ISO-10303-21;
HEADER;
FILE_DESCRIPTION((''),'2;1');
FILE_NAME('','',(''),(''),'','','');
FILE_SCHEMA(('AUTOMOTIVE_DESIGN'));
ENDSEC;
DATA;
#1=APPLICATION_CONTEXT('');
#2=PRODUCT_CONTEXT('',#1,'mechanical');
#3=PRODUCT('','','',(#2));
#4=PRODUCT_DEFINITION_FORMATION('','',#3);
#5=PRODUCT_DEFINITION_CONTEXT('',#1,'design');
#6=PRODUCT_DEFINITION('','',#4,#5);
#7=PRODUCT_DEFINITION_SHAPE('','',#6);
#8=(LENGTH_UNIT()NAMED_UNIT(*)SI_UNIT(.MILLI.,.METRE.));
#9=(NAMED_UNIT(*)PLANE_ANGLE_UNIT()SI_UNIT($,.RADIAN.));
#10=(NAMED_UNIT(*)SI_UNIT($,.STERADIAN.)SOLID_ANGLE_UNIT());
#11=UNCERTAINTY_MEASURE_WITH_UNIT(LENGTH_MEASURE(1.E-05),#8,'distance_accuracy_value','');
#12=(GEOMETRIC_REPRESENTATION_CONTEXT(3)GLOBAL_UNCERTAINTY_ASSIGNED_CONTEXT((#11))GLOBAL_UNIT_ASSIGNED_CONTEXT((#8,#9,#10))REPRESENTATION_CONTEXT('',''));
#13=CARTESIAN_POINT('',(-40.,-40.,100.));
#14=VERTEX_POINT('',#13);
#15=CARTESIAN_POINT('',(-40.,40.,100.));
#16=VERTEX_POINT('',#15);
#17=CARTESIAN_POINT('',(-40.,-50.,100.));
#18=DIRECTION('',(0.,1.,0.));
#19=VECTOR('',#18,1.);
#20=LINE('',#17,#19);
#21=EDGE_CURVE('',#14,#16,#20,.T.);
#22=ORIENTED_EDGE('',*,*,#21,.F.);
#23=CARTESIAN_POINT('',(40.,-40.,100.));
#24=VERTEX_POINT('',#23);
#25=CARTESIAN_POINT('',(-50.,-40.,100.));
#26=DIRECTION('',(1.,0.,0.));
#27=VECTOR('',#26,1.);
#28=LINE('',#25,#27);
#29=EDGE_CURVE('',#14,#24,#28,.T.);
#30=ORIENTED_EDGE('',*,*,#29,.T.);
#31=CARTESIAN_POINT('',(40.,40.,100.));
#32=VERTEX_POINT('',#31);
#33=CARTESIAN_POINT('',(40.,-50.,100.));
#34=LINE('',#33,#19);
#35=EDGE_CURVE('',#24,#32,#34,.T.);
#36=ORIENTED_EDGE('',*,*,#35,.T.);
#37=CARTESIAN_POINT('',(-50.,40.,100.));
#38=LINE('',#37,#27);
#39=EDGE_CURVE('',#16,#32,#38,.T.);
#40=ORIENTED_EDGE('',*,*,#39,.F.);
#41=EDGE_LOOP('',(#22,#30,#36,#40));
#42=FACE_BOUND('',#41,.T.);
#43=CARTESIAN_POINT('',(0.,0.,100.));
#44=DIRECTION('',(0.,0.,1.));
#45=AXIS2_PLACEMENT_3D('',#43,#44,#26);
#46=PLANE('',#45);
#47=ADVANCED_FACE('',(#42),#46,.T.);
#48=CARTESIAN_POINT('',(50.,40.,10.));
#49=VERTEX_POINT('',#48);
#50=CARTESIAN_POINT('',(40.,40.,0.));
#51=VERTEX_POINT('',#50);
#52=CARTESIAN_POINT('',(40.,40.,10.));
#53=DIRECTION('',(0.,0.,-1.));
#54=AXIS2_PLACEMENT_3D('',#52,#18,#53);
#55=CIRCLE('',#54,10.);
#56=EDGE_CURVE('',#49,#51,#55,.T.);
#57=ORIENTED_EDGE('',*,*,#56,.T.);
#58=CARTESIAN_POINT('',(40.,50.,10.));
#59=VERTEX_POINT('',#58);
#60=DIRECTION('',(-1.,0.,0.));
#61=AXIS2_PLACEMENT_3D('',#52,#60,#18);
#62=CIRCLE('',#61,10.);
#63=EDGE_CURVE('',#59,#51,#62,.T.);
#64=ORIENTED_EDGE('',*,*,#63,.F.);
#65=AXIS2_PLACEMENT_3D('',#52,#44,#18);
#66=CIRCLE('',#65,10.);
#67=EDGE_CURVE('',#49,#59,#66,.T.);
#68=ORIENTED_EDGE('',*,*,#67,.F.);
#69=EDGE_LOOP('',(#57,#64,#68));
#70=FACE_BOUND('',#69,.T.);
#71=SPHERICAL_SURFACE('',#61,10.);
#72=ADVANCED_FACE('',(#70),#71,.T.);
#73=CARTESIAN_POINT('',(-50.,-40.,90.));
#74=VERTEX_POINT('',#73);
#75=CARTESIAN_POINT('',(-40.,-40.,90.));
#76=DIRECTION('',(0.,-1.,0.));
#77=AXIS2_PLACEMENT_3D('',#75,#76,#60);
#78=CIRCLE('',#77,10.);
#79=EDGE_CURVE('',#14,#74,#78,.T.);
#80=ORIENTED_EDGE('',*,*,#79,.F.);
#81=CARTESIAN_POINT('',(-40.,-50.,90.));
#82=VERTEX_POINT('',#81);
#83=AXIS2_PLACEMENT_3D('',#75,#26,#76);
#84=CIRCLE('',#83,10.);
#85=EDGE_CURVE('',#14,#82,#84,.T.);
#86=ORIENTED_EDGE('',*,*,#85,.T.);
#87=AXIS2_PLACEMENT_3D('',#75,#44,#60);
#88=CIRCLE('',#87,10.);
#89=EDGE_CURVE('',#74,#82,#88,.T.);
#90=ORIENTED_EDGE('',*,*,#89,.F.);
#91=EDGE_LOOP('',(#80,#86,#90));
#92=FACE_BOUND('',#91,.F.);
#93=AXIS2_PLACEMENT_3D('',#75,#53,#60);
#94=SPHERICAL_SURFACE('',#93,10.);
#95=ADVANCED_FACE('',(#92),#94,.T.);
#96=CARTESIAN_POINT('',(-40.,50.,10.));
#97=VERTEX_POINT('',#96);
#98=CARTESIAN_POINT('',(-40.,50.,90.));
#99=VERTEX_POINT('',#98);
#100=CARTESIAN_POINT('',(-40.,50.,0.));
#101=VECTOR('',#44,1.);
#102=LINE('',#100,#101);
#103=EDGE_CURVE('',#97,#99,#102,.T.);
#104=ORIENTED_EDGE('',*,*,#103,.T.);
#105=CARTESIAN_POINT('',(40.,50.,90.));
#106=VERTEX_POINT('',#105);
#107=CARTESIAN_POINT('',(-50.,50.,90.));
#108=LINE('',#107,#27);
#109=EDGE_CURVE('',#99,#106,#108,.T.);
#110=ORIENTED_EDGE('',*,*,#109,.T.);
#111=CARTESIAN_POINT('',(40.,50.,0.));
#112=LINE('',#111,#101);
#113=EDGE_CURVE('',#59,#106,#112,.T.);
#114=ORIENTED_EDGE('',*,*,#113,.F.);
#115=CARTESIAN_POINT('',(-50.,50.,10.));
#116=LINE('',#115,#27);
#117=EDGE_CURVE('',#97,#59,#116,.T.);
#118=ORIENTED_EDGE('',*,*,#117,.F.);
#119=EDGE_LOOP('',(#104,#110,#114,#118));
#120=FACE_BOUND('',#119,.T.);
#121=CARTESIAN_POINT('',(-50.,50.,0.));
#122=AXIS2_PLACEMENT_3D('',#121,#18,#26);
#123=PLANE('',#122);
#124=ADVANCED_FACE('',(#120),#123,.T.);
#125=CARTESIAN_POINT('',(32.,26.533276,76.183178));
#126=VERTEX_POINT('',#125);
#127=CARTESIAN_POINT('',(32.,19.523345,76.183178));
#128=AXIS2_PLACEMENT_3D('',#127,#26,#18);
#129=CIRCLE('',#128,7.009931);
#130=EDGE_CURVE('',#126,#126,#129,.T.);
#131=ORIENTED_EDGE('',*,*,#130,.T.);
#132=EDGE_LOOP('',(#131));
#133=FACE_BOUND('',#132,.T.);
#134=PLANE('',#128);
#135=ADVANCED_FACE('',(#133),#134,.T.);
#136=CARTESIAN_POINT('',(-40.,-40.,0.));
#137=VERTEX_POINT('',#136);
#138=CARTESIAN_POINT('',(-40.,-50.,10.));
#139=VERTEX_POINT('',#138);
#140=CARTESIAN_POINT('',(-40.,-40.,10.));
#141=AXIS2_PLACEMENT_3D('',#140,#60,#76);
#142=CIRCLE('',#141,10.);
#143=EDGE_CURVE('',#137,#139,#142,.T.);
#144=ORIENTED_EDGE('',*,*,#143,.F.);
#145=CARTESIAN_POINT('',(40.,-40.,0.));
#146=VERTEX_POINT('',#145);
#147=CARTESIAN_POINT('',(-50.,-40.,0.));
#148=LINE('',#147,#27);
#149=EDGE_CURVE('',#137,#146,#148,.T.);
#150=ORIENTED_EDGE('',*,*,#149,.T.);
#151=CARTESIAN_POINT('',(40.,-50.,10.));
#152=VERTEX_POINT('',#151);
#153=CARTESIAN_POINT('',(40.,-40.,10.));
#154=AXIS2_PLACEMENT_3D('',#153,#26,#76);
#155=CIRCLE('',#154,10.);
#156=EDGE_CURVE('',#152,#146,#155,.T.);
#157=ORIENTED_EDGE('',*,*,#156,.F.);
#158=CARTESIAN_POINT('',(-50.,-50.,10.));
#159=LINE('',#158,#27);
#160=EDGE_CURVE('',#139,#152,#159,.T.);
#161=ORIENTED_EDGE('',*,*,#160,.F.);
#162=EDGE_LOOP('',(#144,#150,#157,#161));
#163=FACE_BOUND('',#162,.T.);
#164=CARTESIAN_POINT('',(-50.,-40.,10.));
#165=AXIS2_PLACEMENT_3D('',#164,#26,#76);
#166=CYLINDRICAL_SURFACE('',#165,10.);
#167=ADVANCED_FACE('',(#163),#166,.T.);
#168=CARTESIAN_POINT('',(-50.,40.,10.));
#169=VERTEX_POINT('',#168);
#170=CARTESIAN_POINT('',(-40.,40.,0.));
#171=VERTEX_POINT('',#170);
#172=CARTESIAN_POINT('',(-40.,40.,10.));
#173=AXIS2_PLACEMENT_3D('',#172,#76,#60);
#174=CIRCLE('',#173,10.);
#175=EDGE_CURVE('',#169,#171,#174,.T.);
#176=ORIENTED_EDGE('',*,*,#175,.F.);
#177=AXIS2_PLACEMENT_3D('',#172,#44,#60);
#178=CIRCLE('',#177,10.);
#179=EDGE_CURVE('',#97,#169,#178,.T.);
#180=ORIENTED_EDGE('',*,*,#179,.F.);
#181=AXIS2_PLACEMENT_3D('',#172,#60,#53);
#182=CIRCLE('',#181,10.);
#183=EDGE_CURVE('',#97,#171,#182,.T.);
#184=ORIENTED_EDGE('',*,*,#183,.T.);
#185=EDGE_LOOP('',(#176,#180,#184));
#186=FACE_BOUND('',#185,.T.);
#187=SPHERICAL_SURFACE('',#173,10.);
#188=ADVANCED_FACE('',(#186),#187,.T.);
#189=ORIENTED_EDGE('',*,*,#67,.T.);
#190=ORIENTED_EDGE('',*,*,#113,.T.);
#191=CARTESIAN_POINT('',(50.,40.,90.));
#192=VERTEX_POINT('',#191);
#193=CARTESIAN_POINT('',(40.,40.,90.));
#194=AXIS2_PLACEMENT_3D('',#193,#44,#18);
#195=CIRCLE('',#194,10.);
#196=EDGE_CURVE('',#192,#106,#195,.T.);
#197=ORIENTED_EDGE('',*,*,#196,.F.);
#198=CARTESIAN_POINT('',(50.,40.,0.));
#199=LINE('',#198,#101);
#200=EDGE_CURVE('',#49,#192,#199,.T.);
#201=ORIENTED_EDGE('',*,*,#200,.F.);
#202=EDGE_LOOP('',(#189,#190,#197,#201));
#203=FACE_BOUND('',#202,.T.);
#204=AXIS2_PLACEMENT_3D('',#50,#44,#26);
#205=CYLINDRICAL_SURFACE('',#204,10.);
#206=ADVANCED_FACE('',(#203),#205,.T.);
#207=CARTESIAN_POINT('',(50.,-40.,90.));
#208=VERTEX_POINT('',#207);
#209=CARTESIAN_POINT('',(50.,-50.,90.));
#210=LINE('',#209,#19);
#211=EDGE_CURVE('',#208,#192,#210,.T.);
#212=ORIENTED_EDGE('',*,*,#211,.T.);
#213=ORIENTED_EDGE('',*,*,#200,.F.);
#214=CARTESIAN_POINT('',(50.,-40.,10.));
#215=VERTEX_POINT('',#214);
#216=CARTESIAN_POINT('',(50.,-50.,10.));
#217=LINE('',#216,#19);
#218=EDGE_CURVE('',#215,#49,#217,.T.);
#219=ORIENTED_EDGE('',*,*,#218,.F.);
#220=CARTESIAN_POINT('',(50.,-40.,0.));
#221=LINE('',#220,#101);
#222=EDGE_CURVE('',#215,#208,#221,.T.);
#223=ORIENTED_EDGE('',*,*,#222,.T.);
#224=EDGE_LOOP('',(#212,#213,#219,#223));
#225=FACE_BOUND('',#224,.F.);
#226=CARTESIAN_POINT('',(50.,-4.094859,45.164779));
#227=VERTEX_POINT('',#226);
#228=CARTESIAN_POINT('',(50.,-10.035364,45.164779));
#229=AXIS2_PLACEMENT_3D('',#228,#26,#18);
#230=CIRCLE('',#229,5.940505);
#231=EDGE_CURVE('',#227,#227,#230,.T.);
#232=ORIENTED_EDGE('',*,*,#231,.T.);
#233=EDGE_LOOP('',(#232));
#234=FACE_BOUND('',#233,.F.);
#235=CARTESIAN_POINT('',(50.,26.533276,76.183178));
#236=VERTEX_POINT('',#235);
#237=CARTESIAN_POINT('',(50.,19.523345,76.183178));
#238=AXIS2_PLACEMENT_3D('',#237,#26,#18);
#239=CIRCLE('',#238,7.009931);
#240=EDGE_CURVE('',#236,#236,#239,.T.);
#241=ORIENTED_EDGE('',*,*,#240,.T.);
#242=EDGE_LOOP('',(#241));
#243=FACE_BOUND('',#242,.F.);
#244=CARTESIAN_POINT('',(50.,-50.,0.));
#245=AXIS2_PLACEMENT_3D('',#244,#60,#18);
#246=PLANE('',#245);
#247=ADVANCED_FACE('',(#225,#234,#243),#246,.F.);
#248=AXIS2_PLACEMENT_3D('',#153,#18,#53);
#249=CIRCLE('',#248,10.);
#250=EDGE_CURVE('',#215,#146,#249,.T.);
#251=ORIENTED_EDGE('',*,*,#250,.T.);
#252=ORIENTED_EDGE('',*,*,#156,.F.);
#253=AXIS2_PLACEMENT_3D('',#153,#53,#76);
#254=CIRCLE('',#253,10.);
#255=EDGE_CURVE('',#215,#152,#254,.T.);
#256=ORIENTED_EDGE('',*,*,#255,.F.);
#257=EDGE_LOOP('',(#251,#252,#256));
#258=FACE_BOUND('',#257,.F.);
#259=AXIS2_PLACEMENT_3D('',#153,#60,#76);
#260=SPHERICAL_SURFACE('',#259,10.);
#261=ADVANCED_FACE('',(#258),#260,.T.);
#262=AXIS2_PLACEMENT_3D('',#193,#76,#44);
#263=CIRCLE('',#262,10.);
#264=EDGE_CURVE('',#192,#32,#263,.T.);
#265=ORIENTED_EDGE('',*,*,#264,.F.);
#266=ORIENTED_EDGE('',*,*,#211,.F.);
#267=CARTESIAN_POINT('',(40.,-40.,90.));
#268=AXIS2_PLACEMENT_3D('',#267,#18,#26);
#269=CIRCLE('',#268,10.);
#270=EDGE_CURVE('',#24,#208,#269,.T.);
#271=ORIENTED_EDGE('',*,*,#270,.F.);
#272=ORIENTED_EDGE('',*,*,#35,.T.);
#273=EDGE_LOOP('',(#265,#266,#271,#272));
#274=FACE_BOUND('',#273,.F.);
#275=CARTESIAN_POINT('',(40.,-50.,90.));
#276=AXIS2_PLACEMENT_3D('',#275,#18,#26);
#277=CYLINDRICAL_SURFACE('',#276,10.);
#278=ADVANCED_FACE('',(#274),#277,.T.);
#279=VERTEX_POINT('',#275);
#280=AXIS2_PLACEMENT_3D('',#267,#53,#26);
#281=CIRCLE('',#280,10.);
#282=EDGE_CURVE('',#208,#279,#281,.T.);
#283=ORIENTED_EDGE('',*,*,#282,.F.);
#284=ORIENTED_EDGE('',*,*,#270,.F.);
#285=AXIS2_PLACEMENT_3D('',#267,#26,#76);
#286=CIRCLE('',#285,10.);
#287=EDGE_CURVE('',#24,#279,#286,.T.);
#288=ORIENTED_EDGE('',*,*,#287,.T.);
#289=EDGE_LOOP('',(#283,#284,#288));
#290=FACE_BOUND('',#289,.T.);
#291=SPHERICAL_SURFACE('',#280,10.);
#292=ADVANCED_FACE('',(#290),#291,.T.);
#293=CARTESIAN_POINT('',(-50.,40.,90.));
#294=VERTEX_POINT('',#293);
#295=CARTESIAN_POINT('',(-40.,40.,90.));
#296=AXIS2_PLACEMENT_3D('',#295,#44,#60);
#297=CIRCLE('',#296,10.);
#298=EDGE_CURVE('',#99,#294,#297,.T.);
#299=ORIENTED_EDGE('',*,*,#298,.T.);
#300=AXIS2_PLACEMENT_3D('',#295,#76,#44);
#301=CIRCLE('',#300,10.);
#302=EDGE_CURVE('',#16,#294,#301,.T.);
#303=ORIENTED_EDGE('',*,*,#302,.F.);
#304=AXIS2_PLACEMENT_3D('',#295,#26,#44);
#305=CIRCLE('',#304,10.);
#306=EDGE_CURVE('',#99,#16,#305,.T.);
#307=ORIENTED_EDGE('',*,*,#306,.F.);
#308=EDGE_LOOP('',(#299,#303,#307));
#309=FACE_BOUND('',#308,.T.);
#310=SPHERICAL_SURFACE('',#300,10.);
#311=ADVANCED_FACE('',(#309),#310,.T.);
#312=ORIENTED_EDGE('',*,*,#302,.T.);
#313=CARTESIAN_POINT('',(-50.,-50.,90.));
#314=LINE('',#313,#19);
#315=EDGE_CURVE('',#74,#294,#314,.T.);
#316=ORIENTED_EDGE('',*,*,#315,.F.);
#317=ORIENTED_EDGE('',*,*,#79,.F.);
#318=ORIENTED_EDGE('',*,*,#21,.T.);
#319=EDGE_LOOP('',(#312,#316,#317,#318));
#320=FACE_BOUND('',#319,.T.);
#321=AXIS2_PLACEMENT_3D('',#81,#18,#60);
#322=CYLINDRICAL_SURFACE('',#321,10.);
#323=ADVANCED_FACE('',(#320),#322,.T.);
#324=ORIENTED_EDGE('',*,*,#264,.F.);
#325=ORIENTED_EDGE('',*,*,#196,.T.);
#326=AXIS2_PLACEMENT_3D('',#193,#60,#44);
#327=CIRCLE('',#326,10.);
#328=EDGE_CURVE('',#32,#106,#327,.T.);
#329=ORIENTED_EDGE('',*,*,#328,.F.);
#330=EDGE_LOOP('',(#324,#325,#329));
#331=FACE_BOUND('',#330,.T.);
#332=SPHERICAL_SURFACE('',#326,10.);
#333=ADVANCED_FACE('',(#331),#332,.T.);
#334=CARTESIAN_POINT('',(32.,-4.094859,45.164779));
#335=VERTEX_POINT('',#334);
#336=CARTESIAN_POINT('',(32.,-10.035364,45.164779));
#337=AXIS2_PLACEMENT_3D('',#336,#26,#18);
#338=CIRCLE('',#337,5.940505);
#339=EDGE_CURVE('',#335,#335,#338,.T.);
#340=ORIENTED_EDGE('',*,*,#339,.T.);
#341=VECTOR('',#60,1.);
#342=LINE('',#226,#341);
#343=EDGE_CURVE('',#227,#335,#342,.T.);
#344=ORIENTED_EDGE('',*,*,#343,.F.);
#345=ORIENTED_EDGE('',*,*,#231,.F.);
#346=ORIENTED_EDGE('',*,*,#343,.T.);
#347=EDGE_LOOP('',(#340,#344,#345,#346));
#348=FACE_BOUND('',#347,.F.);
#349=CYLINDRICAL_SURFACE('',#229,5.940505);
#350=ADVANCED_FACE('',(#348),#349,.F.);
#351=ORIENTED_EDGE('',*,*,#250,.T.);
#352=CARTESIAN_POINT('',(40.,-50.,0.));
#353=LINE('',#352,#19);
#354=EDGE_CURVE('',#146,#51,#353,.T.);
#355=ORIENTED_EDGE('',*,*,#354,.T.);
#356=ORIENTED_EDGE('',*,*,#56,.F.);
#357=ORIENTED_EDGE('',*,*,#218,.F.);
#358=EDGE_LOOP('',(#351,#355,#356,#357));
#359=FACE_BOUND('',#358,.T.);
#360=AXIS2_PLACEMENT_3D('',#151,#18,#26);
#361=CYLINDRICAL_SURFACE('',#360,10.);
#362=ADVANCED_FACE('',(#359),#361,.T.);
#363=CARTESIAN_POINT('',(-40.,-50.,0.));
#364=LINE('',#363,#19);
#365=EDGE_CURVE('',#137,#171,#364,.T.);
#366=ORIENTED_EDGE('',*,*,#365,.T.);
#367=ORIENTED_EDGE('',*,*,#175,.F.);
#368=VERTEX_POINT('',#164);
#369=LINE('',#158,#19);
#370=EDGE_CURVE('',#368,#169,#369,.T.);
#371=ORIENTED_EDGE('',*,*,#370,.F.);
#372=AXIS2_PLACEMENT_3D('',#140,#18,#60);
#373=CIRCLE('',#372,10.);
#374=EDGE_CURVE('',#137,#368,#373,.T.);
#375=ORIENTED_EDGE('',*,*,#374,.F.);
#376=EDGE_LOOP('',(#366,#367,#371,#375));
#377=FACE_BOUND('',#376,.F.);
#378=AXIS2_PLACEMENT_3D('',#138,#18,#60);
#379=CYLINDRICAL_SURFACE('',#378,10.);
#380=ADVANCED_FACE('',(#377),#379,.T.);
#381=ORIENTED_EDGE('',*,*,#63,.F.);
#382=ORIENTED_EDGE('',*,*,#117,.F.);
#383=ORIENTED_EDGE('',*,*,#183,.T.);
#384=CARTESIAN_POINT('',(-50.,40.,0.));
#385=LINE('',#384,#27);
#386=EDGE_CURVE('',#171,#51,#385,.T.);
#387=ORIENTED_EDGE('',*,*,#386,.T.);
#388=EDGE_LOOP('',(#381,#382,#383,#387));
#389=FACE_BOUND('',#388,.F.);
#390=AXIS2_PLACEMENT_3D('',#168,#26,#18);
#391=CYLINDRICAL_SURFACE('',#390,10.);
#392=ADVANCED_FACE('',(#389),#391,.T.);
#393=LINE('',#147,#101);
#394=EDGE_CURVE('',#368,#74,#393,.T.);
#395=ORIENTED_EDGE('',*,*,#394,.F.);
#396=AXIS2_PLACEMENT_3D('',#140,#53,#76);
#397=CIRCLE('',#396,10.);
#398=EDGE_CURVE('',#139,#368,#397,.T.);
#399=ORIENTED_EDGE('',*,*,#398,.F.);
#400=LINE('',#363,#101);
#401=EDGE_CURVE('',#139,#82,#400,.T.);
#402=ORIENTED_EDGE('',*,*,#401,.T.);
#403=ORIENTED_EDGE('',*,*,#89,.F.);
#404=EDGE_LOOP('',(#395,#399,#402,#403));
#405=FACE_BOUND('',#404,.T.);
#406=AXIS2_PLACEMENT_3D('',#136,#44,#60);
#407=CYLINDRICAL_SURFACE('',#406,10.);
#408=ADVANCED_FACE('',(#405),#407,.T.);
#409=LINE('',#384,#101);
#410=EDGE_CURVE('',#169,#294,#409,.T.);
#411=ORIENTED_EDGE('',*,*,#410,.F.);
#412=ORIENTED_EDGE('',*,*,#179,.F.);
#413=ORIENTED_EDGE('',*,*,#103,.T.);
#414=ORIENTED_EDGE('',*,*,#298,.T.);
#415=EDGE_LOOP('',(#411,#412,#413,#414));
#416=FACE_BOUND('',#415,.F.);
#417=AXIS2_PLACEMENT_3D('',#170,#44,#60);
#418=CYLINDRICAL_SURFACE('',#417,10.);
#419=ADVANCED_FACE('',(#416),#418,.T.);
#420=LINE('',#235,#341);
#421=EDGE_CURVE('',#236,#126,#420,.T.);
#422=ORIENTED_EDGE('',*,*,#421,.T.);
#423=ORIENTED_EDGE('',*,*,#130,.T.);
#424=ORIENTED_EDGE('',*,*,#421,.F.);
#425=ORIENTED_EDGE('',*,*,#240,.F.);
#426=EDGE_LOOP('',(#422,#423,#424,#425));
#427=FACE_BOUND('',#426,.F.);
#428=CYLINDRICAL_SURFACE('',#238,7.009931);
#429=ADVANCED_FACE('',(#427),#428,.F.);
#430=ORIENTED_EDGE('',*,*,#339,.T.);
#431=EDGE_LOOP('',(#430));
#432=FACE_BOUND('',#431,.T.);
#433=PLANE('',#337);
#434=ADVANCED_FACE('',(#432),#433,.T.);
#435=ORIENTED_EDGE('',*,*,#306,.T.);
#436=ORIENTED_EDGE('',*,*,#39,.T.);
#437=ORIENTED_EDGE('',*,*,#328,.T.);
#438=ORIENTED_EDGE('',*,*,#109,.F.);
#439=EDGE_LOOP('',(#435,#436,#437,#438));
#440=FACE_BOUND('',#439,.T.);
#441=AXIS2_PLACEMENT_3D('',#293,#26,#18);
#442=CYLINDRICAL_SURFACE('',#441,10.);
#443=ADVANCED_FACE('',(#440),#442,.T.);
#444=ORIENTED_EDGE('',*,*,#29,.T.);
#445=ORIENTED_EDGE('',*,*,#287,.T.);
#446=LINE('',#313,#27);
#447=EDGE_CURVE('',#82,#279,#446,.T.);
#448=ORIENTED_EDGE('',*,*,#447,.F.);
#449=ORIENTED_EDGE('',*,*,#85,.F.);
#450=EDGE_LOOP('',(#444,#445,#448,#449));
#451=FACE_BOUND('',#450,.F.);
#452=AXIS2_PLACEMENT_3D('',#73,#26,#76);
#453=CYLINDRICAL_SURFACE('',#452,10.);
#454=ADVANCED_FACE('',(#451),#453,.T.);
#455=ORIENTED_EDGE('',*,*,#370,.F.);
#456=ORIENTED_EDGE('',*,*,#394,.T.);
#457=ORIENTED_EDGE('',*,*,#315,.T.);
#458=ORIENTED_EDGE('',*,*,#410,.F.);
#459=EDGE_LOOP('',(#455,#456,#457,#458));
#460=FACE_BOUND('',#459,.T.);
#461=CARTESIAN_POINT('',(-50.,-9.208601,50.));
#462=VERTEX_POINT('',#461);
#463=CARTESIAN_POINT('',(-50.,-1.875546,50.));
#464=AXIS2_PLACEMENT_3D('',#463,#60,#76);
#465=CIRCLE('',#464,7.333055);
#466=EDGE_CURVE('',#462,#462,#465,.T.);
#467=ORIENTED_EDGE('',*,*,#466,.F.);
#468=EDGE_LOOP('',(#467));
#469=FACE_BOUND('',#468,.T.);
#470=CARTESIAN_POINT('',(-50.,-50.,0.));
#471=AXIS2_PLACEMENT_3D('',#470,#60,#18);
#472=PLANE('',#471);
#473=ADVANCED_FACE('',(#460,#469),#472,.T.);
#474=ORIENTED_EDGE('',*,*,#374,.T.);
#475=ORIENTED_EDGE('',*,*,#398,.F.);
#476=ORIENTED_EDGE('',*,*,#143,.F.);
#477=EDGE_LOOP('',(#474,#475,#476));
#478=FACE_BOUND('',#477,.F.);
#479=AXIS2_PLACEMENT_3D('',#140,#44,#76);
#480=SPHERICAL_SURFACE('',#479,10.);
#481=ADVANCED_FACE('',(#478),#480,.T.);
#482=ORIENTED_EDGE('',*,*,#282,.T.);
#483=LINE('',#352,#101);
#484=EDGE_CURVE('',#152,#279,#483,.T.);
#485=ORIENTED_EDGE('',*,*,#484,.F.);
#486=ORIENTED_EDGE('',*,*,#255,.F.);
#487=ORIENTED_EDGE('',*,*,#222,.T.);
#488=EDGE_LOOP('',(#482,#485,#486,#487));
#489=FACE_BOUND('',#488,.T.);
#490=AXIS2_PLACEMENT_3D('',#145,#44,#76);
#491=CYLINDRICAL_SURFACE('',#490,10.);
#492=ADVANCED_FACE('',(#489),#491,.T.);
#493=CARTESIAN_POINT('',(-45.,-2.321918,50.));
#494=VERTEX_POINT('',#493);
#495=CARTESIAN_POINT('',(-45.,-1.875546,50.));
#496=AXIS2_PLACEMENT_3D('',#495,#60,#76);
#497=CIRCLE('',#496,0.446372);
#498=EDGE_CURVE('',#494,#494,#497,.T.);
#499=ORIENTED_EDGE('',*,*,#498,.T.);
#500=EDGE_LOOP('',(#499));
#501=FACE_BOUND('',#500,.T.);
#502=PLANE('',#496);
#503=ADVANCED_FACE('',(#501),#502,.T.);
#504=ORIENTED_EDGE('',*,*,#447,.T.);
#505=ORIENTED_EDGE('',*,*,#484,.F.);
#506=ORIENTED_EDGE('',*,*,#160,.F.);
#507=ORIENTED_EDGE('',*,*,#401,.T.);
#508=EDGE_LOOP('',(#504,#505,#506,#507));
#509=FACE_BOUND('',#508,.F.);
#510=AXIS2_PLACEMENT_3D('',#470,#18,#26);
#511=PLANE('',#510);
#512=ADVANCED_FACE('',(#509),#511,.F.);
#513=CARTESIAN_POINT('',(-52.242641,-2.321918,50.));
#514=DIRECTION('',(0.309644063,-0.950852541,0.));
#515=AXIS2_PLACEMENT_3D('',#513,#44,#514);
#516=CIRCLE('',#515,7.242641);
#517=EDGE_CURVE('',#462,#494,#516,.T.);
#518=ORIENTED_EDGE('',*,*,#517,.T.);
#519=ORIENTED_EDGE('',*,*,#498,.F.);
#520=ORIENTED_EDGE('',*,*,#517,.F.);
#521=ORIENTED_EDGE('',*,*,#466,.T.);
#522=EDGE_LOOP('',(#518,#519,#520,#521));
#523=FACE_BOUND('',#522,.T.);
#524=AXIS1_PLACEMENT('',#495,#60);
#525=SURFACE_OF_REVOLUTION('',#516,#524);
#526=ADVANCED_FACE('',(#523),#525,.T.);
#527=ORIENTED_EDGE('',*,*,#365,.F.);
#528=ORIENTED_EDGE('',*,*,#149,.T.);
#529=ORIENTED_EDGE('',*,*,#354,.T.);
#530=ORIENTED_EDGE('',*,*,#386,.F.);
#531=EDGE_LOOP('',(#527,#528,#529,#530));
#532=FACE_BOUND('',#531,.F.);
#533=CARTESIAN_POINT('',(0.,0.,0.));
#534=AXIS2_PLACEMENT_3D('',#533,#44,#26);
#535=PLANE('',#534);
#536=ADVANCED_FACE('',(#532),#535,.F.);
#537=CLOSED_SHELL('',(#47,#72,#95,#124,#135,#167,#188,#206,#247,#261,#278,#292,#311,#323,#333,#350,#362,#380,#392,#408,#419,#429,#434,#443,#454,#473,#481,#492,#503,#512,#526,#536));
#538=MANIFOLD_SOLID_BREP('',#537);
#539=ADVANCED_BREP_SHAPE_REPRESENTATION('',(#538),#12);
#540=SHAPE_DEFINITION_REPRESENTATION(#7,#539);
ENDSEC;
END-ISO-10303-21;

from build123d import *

# Parameters (mm, degrees)
F0_W     = 100
F0_H     = 100
F1_DEPTH = 100
F2_R     = 10
F3_R     = 7.3330548606
F4_DEPTH = 5
F5_R     = 7.0099311872
F5_R_2   = 5.9405048223
F6_DEPTH = 18


# Not quite as in the source:
# - a fillet or chamfer that OpenCascade refuses, or shapes differently, is made with other operations: its cross-section is extruded or revolved along the edge and cut away or added


with BuildPart() as f1:
    # F0 (on Top) → F1 (new body)
    with BuildSketch(Plane.XY):
        Rectangle(F0_W, F0_H)
    extrude(amount=F1_DEPTH)

    # F2
    f2_edges = [f1.edges().sort_by_distance(p)[0] for p in [
        (-50, -50, 50),
        (0, -50, 0),
        (50, -50, 50),
        (-50, 0, 100),
        (0, 50, 100),
        (50, 0, 100),
        (0, -50, 100),
        (-50, 0, 0),
        (-50, 50, 50),
        (0, 50, 0),
        (50, 50, 50),
        (50, 0, 0),
    ]]
    fillet(f2_edges, radius=F2_R)

    # F3 (on face) → F4 (cut)
    with BuildSketch(Plane(origin=(-50, 0, 0), x_dir=(0, -1, 0), z_dir=(-1, 0, 0))):
        with Locations((1.8755461788, 50)):
            Circle(F3_R)
    extrude(amount=-F4_DEPTH, mode=Mode.SUBTRACT)

    # F5 (on face) → F6 (cut)
    with BuildSketch(Plane.YZ.offset(50)):
        with Locations((19.523344934, 76.1831775308)):
            Circle(F5_R)
        with Locations((-10.0353639573, 45.1647788286)):
            Circle(F5_R_2)
    extrude(amount=-F6_DEPTH, mode=Mode.SUBTRACT)

    # F7: fillet of radius 7.2426406871 on 5 edges, made by hand

    # F7_s1 → F7_t2 (revolve)
    with BuildSketch(Plane.XY.offset(50)):
        with BuildLine():
            ThreePointArc((-50, -9.2086010394), (-46.3818180141, -6.5771030138), (-45, -2.3219177396))
            Line((-45, -2.3219177396), (-45, -9.2086010394))
            Line((-45, -9.2086010394), (-50, -9.2086010394))
        make_face()
    revolve(axis=Axis((-45, -1.8755461788, 50), (-1, 0, 0)))


solid = f1.part
